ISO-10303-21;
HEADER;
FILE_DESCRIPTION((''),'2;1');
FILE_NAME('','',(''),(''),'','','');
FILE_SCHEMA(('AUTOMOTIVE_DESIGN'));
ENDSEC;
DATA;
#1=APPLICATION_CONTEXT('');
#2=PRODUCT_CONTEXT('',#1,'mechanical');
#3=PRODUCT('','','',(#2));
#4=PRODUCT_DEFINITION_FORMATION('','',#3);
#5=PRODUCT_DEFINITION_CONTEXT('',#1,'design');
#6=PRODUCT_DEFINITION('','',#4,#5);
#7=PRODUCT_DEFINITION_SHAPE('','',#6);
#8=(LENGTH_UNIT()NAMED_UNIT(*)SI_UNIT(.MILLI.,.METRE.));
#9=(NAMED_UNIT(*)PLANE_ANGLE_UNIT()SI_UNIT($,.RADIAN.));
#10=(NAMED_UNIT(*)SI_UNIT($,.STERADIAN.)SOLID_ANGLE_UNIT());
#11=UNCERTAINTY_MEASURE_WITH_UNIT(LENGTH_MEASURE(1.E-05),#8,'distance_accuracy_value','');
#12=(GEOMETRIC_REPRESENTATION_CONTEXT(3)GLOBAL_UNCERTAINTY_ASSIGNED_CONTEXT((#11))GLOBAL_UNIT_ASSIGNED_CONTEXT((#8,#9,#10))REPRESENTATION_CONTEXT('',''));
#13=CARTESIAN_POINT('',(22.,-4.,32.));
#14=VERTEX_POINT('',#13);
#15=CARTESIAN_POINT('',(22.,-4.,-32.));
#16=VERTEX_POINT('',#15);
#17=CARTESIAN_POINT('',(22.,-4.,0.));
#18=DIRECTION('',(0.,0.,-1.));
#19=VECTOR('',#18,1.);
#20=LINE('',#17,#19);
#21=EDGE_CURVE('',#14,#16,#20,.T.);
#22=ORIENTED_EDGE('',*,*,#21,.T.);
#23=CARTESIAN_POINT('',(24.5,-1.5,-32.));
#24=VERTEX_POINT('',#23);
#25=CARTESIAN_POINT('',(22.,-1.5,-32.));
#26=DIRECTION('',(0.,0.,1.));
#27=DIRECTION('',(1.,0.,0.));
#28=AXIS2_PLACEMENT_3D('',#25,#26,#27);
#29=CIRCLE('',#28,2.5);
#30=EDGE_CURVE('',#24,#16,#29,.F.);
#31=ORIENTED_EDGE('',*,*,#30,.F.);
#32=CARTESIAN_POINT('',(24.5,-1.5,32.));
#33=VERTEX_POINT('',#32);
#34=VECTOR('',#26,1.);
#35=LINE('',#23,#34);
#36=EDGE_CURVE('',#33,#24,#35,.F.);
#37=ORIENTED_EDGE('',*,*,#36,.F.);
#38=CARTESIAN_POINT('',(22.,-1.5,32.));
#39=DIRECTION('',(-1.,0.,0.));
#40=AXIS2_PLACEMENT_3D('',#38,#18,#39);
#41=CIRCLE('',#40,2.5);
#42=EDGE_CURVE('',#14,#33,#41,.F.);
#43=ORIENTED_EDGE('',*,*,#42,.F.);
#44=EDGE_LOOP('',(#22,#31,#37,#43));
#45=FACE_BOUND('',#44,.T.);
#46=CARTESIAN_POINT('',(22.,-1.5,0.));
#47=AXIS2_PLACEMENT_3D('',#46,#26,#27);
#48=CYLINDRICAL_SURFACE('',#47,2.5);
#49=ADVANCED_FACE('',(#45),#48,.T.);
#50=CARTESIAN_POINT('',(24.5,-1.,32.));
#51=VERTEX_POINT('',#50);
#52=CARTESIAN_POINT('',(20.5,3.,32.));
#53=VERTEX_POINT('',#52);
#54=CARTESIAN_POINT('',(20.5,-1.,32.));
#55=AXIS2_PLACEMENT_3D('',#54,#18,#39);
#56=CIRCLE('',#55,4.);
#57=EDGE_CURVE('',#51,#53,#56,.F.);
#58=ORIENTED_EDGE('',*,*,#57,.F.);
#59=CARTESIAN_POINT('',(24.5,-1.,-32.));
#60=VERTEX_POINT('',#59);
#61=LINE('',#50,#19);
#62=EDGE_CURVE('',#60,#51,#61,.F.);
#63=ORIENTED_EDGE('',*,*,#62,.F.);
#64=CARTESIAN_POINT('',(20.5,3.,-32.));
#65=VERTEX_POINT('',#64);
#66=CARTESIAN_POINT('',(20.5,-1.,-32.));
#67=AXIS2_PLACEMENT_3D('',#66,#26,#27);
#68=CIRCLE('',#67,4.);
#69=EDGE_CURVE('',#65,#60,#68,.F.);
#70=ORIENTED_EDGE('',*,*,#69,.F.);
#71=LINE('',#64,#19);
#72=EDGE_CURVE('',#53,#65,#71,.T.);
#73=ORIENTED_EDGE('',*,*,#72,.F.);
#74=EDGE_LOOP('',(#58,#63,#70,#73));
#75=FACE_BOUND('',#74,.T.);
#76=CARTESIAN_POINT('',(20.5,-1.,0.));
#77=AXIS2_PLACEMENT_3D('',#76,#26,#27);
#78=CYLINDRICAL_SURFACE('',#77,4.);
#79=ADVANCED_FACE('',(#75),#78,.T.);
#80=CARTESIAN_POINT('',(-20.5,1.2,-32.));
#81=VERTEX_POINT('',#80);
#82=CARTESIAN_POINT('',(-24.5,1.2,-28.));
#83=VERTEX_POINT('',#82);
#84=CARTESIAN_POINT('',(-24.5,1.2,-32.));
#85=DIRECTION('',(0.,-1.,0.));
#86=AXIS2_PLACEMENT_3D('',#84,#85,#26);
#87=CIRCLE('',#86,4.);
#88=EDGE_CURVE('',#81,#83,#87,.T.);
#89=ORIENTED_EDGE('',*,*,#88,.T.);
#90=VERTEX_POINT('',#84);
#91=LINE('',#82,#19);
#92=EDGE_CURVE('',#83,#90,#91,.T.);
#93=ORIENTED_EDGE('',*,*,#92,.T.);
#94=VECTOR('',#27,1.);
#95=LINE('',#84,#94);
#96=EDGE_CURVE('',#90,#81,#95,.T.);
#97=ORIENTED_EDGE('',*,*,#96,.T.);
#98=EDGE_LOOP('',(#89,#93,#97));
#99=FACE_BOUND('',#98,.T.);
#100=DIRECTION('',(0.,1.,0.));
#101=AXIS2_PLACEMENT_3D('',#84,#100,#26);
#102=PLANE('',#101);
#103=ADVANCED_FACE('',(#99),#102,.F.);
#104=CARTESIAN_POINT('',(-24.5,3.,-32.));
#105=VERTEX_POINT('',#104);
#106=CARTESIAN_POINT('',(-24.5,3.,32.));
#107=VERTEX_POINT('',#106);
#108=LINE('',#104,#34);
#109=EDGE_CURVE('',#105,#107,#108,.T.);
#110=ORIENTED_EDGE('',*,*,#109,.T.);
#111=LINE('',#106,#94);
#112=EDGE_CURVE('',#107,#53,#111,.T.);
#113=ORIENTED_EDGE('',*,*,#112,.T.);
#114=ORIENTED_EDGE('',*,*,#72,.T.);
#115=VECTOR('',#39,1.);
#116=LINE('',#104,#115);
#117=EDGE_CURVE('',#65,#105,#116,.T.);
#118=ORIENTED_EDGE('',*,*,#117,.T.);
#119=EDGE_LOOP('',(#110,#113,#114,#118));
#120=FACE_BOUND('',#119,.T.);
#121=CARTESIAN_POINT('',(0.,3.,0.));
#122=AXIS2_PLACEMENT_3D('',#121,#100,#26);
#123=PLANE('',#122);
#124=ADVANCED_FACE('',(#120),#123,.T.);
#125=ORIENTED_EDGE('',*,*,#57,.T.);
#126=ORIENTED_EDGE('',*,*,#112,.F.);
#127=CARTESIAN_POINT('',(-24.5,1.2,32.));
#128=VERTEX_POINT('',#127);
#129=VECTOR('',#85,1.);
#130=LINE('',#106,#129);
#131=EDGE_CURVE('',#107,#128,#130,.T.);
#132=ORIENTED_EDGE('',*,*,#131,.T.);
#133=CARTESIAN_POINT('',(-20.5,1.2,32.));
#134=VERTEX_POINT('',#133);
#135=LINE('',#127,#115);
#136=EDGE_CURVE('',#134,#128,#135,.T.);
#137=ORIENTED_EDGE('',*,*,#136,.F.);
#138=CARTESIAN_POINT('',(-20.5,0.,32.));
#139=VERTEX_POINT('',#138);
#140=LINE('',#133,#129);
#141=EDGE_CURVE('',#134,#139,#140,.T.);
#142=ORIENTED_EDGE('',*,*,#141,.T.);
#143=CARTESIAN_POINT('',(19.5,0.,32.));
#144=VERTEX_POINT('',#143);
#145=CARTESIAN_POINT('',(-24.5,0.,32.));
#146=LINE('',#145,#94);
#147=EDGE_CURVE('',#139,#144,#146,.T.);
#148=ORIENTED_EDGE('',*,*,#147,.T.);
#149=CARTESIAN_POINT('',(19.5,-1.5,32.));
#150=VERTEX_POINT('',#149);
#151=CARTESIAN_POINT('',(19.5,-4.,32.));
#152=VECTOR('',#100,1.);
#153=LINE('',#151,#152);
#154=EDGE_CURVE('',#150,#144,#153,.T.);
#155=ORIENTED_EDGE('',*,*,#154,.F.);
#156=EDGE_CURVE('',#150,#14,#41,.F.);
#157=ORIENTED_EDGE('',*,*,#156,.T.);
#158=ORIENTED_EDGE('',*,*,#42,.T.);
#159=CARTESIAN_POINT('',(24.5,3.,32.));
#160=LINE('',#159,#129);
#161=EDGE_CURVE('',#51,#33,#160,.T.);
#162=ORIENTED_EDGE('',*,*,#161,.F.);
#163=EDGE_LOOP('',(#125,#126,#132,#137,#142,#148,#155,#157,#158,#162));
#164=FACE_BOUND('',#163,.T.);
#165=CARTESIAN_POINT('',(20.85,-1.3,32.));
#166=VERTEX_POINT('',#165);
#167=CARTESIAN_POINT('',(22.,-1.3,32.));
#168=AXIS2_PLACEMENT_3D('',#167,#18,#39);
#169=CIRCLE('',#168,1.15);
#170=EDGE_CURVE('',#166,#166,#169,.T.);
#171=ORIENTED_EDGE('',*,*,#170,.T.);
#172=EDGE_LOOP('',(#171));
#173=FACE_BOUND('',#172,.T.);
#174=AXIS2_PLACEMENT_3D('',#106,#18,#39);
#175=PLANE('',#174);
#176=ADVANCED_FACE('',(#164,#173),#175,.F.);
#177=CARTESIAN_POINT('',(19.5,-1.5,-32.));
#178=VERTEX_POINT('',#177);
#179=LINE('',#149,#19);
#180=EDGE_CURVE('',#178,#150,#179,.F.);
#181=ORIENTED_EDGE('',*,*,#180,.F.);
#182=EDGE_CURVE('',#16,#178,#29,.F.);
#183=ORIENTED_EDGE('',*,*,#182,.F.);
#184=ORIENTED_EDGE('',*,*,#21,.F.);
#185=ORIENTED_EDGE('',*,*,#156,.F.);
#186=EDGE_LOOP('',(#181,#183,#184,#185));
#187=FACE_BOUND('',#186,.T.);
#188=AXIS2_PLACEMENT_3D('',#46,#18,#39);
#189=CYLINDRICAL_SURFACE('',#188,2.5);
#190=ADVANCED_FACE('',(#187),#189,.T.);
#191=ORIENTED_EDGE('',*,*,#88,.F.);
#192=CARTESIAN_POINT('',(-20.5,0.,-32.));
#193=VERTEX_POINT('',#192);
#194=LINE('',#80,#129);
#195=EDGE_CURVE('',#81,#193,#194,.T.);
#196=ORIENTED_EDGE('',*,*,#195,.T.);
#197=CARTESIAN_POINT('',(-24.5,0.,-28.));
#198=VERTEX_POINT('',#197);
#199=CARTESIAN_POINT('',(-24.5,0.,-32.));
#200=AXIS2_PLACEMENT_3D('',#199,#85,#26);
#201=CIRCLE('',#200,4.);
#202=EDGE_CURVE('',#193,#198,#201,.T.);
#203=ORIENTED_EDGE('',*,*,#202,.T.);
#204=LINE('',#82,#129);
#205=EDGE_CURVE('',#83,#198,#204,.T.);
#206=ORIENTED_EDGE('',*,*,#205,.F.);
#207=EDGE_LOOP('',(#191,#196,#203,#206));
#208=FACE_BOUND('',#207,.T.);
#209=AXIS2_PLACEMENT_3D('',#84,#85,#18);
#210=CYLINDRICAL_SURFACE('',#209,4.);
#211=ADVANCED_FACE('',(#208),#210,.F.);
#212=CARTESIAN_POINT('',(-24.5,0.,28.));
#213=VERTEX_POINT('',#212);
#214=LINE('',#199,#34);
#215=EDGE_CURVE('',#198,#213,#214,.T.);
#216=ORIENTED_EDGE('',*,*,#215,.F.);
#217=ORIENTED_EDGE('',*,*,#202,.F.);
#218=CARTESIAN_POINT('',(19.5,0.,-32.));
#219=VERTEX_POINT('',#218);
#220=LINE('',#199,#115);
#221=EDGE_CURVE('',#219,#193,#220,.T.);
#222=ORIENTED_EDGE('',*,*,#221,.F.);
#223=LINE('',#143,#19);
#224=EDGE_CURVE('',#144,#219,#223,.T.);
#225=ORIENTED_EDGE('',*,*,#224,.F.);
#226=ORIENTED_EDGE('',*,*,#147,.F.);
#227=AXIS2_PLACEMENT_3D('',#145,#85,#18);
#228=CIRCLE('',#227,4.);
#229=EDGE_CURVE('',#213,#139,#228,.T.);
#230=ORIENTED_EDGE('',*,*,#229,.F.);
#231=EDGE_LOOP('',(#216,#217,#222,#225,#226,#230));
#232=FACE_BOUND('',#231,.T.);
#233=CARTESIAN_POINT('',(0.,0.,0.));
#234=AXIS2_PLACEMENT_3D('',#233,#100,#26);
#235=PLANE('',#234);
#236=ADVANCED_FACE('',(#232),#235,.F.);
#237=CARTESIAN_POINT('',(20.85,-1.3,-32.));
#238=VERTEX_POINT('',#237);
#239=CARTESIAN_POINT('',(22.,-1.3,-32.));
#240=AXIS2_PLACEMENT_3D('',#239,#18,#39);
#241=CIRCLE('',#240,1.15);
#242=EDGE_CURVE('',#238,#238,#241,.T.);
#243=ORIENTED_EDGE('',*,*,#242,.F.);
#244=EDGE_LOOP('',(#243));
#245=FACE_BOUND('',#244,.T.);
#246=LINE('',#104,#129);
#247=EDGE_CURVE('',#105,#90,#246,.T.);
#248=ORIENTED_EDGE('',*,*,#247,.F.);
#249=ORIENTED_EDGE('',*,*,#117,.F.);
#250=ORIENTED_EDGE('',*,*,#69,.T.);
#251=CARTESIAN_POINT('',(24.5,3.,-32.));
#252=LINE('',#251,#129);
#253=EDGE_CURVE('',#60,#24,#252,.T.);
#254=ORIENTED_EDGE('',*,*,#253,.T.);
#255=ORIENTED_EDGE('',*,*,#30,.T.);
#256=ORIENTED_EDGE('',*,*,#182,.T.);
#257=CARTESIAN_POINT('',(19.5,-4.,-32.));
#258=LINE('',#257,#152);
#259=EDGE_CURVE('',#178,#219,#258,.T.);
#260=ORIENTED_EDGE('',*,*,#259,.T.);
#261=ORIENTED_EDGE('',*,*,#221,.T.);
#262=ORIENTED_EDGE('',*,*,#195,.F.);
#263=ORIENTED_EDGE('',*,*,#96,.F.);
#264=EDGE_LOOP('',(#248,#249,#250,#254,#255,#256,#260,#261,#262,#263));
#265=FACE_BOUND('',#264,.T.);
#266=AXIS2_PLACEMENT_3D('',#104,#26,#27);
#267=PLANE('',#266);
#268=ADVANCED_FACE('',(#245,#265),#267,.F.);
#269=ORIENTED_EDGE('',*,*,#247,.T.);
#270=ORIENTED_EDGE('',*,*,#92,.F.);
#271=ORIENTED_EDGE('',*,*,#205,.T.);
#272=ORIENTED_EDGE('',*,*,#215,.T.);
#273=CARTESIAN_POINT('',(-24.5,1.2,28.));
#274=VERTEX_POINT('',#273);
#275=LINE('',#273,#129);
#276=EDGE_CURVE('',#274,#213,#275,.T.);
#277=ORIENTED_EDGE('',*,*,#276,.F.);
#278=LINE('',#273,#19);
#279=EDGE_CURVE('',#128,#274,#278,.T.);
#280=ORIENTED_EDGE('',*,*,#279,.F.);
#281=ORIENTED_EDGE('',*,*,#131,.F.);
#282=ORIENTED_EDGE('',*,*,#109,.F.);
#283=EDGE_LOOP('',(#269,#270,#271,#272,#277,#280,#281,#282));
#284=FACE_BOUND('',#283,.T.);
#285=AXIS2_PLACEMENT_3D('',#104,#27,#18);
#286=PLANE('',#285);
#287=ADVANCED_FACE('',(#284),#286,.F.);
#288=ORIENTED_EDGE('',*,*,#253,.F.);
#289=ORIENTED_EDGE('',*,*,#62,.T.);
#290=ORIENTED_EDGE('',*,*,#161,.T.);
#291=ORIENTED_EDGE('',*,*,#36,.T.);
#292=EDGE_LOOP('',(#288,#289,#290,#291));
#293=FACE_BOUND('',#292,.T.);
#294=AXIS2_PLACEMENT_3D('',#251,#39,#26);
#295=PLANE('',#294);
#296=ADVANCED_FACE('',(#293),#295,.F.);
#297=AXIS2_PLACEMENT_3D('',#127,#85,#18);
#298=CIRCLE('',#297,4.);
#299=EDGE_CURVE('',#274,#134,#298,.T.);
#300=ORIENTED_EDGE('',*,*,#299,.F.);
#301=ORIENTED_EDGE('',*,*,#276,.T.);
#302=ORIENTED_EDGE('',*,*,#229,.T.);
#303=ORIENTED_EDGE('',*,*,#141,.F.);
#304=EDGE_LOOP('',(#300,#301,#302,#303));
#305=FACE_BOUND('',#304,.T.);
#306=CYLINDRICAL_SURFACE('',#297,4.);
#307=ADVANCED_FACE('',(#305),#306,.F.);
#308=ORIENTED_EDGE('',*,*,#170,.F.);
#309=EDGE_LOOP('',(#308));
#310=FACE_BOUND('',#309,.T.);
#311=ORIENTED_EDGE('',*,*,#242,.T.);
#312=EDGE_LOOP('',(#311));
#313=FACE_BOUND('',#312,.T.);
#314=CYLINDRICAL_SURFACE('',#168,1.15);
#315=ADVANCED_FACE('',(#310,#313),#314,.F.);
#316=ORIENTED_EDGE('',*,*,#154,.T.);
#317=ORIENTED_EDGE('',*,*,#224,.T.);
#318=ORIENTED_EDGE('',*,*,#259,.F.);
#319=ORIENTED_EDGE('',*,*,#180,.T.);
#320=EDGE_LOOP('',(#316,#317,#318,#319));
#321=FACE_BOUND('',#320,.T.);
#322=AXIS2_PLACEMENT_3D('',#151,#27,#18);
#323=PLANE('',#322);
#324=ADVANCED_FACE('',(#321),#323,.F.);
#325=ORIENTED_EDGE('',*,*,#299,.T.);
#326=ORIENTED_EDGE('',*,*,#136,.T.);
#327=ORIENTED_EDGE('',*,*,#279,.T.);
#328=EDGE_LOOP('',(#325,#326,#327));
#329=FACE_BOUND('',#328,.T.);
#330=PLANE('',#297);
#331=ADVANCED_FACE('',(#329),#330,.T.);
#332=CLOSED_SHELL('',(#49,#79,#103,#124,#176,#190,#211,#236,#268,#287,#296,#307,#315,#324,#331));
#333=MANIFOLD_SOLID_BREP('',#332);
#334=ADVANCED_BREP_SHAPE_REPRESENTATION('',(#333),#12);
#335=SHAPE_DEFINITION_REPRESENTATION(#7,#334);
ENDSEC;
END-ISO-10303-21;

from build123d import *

# Parameters (mm, degrees)
SKETCH_1_W          = 49
SKETCH_1_H          = 64
EXTRUDE_1_DEPTH     = 3
SKETCH_2_W          = 5
SKETCH_2_H          = 64
EXTRUDE_2_DEPTH     = 4
SKETCH_3_R          = 1.15
CUT_EXTRUDE_2_DEPTH = 69.645830172
FILLET_1_R          = 2.5
FILLET_2_R          = 4
CUT_EXTRUDE_3_DEPTH = 1.2


with BuildPart() as part:
    # 草图1 → 凸台-拉伸1 (new body)
    with BuildSketch(Plane(origin=(0, 0, 0), x_dir=(1, 0, 0), z_dir=(0, 1, 0))):
        Rectangle(SKETCH_1_W, SKETCH_1_H)
    extrude(amount=EXTRUDE_1_DEPTH)

    # 草图2 → 凸台-拉伸2 (add)
    with BuildSketch(Plane(origin=(0, 0, 0), x_dir=(-1, 0, 0), z_dir=(0, -1, 0))):
        with Locations((-22, 0)):
            Rectangle(SKETCH_2_W, SKETCH_2_H)
    extrude(amount=EXTRUDE_2_DEPTH)

    # 草图3 → 切除-拉伸2 (cut, through all)
    with BuildSketch(Plane(origin=(0, 0, -32), x_dir=(-1, 0, 0), z_dir=(0, 0, -1))):
        with Locations((-22, -1.3)):
            Circle(SKETCH_3_R)
    extrude(amount=-CUT_EXTRUDE_2_DEPTH, mode=Mode.SUBTRACT)

    # 圆角1
    fillet_1_edges = [part.edges().sort_by_distance(p)[0] for p in [
        (24.5, -4, 0),
        (19.5, -4, 0),
    ]]
    fillet(fillet_1_edges, radius=FILLET_1_R - 0.0001)  # a hair under: the kernel refuses the full size

    # 圆角2
    fillet_2_edges = [part.edges().sort_by_distance(p)[0] for p in [
        (24.5, 3, 0),
    ]]
    fillet(fillet_2_edges, radius=FILLET_2_R)

    # 草图4 → 切除-拉伸3 (cut)
    with BuildSketch(Plane(origin=(0, 0, 0), x_dir=(-1, 0, 0), z_dir=(0, -1, 0))):
        with BuildLine():
            Line((24.5, -28), (24.5, -32))
            Line((24.5, -32), (20.5, -32))
            ThreePointArc((20.5, -32), (21.671572875, -29.171572875), (24.5, -28))
        make_face()
        with BuildLine():
            Line((24.5, 28), (24.5, 32))
            Line((24.5, 32), (20.5, 32))
            ThreePointArc((20.5, 32), (21.671572875, 29.171572875), (24.5, 28))
        make_face()
    extrude(amount=-CUT_EXTRUDE_3_DEPTH, mode=Mode.SUBTRACT)


solid = part.part
